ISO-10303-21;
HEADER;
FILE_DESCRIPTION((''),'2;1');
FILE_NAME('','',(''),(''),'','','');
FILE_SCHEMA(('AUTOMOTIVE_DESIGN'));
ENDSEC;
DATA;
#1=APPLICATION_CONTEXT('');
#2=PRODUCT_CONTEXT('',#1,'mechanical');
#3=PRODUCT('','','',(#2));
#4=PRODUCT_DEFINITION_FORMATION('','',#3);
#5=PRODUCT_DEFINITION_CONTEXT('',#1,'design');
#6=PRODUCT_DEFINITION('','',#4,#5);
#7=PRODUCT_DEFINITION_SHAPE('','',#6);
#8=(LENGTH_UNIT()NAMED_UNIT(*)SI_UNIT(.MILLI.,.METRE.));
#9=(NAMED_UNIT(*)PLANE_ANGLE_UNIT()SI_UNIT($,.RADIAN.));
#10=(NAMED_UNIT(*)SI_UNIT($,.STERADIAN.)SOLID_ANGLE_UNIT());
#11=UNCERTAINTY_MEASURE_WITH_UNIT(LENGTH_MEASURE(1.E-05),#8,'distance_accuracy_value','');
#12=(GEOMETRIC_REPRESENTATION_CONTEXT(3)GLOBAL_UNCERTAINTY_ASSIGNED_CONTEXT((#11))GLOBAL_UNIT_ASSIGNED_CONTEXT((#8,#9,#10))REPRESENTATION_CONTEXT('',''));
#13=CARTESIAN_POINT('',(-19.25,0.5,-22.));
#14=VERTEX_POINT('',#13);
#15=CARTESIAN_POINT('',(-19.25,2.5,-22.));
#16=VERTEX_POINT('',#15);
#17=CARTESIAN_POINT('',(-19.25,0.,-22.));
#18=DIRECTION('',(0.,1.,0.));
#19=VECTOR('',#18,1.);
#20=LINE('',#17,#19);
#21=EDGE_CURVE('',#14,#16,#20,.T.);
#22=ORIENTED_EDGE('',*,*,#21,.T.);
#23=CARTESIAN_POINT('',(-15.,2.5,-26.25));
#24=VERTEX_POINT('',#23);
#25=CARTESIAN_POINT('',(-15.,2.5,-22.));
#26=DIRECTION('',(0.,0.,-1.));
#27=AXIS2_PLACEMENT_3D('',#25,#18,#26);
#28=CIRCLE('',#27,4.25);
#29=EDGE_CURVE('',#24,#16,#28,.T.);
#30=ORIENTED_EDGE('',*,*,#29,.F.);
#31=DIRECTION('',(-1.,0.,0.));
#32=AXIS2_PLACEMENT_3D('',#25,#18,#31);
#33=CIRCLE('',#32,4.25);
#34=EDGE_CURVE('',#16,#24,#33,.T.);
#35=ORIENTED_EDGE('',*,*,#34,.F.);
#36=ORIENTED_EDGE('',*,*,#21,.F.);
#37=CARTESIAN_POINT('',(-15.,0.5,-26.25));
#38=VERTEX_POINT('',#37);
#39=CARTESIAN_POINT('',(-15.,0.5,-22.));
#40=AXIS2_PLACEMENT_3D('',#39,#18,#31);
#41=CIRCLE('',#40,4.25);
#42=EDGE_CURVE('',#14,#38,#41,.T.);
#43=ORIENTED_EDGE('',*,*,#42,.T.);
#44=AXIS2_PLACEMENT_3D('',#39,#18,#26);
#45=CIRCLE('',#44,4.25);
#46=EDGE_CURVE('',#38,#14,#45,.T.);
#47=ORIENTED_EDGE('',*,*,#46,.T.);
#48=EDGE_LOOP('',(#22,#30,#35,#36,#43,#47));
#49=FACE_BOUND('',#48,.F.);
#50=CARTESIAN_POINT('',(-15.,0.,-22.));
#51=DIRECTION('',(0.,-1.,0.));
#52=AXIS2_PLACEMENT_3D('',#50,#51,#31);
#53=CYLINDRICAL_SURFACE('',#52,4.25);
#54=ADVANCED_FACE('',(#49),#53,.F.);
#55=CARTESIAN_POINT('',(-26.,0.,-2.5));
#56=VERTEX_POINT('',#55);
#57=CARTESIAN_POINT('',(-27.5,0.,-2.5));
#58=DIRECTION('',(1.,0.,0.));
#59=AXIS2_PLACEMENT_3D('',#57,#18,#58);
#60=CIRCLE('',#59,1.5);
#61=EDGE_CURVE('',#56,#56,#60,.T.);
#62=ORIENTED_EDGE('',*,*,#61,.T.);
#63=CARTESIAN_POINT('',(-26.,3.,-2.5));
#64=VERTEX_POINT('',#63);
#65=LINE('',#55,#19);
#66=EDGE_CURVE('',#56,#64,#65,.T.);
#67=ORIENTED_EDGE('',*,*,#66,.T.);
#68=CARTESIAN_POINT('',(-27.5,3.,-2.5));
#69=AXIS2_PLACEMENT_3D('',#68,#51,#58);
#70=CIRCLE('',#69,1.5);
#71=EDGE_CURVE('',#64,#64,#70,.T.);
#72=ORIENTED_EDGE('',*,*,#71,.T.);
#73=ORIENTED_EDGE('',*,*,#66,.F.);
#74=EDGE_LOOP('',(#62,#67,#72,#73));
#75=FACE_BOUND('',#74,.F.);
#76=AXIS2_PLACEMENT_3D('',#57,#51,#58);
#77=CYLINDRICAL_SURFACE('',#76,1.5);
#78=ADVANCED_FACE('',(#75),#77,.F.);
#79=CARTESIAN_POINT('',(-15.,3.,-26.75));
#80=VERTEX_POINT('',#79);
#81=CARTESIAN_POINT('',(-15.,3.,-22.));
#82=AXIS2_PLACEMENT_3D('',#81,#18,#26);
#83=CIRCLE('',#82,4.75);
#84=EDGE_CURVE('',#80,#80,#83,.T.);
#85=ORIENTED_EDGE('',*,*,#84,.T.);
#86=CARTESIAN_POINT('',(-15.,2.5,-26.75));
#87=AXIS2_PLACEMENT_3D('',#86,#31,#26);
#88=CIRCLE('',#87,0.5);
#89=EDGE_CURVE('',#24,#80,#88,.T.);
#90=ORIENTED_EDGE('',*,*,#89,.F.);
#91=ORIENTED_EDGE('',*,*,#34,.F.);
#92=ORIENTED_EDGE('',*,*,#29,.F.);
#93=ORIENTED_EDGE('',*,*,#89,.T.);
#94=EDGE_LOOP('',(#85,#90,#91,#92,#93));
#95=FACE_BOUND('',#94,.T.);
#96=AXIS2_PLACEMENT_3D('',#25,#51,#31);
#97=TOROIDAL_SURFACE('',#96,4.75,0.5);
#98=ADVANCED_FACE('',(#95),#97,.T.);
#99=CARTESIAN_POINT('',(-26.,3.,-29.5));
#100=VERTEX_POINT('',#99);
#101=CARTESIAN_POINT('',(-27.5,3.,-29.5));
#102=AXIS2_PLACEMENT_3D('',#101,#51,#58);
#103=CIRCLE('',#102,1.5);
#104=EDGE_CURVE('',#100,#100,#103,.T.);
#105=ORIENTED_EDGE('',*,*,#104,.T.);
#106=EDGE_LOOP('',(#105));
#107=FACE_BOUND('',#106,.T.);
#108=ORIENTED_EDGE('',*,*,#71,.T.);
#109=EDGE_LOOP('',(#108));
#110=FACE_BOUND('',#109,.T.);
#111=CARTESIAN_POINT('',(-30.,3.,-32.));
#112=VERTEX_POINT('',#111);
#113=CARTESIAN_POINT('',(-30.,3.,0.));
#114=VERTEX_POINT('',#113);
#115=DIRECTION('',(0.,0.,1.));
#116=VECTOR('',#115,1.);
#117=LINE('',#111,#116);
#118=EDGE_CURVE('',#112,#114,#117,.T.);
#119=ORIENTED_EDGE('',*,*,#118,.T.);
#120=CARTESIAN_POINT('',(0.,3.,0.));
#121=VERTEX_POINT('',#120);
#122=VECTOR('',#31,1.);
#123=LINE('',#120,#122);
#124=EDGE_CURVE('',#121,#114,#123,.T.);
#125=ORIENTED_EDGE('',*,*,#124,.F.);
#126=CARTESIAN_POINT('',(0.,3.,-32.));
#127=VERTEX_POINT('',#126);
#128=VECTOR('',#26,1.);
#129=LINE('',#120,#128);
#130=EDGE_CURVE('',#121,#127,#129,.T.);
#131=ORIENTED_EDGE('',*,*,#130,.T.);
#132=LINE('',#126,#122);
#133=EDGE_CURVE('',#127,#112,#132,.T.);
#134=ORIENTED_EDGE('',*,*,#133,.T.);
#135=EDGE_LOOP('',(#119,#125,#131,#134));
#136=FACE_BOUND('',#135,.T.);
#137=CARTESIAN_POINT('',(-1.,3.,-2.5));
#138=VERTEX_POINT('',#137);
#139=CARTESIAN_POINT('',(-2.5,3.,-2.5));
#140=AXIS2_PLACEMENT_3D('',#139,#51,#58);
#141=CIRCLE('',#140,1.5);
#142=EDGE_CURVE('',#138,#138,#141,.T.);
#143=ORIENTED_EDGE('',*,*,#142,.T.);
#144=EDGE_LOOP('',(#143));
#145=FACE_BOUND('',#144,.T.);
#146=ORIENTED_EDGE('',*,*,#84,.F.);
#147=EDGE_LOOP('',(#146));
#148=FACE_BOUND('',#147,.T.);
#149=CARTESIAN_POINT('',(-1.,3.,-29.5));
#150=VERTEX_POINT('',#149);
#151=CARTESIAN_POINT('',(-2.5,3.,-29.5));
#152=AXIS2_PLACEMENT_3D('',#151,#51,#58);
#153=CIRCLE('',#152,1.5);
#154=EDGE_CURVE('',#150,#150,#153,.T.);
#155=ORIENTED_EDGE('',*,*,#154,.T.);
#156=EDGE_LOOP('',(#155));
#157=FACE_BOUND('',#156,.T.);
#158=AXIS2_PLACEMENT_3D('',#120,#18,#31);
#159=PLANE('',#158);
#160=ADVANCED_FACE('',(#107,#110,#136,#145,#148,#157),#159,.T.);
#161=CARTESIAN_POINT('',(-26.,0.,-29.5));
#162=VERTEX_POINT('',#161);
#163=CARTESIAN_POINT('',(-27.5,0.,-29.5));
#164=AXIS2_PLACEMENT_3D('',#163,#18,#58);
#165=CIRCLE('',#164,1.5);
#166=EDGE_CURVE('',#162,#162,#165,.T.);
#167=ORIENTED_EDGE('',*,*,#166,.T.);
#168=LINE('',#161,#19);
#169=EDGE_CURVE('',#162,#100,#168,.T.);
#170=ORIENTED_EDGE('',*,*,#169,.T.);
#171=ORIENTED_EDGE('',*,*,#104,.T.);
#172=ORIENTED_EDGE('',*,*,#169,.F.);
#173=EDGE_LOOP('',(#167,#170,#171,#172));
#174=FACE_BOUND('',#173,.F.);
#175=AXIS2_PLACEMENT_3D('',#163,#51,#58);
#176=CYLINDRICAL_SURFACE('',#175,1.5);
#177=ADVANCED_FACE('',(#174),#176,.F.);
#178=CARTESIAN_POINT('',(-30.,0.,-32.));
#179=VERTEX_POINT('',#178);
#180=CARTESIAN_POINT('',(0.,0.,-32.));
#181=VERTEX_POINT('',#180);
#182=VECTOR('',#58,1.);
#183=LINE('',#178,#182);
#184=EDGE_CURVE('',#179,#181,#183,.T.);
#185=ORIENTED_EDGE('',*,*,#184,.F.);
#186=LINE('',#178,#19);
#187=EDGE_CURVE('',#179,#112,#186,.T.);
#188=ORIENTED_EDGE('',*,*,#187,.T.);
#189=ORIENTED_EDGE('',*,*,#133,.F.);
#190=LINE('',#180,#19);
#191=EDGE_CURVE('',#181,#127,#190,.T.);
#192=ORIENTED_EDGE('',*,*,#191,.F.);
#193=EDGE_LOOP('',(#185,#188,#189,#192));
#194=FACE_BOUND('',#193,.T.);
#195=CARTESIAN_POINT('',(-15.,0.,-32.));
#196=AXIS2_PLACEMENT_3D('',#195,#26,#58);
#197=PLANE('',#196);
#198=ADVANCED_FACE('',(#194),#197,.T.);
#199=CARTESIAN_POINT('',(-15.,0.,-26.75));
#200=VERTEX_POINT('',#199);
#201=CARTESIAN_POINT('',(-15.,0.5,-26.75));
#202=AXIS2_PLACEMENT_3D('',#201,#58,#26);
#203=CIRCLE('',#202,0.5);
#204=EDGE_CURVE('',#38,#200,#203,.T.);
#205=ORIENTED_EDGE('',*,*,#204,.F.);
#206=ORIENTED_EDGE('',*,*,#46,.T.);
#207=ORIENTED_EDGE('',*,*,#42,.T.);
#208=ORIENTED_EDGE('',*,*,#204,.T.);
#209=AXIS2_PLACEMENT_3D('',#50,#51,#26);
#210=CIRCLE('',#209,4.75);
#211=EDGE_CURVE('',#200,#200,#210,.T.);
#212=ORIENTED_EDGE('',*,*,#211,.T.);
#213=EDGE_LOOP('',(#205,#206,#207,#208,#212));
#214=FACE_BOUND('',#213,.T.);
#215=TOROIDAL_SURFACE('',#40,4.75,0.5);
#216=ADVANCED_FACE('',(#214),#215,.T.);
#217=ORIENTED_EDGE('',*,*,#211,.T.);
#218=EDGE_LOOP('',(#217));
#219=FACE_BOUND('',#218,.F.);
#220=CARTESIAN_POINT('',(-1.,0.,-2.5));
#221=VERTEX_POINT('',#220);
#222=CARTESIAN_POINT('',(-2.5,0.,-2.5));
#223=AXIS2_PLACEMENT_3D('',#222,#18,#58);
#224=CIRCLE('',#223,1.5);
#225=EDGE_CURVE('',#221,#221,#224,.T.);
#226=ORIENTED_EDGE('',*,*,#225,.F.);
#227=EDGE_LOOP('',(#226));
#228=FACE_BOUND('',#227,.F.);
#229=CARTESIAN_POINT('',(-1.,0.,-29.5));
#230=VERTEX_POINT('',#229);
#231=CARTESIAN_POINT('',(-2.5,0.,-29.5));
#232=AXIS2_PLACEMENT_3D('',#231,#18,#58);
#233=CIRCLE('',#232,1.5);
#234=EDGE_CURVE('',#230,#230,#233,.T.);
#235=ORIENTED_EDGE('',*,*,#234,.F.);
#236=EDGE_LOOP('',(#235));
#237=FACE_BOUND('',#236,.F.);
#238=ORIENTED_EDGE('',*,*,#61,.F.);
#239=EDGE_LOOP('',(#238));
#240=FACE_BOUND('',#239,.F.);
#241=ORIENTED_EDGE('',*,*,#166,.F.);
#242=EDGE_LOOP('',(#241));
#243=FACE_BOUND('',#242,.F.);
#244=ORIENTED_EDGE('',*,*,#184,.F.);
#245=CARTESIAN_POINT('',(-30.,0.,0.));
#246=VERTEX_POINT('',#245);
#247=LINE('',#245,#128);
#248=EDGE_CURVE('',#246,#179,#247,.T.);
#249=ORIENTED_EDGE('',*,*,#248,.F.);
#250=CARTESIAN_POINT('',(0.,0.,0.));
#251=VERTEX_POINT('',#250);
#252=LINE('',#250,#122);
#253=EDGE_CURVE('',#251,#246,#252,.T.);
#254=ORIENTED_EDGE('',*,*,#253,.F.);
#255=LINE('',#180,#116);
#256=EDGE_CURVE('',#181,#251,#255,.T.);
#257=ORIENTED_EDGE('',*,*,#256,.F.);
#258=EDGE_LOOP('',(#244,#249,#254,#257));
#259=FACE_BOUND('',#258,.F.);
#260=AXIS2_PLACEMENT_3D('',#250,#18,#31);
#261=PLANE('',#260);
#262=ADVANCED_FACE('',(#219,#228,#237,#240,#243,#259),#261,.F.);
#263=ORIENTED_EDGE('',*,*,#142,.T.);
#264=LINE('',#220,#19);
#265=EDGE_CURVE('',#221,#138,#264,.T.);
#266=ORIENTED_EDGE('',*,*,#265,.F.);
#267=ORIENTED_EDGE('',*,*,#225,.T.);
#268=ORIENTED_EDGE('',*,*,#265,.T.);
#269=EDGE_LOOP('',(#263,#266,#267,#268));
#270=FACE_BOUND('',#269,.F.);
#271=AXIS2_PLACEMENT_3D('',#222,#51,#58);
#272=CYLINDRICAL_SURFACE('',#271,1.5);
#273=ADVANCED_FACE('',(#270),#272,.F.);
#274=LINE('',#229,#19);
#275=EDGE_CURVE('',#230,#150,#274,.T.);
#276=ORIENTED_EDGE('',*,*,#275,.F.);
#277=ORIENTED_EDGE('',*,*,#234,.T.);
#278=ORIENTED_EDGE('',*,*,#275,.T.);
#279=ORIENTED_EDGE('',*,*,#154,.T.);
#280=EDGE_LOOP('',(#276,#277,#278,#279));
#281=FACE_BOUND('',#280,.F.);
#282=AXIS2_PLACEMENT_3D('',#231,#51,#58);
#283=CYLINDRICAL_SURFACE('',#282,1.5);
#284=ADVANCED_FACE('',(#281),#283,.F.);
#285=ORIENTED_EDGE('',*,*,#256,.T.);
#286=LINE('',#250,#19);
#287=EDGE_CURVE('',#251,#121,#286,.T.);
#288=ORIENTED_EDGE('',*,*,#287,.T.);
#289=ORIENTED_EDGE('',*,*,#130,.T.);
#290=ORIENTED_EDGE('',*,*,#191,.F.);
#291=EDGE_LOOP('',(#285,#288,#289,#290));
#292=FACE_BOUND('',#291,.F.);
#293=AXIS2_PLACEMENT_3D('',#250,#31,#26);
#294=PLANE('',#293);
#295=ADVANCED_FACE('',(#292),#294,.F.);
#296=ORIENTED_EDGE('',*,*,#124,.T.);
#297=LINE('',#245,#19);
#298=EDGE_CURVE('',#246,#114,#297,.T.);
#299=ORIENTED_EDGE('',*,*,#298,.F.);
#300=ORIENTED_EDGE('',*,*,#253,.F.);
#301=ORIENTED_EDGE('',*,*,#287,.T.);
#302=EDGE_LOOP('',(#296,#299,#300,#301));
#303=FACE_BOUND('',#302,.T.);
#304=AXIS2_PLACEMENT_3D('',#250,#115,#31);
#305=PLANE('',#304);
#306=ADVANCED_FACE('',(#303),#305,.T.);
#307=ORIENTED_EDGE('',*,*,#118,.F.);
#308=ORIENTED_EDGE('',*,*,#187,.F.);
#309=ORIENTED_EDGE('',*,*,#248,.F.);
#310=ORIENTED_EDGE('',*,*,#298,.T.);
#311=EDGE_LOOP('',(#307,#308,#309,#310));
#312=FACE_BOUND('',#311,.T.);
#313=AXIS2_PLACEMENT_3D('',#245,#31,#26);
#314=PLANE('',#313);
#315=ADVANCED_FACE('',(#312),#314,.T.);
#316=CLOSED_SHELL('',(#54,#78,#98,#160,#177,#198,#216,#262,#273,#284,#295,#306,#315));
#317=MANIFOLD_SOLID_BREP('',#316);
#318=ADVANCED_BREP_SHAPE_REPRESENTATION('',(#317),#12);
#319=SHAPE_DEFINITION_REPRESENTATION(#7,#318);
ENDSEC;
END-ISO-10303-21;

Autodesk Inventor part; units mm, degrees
ref_plane "YZ Plane" through (0, 0, 0) normal (1, 0, 0) x (0, 1, 0)
ref_plane "XZ Plane" through (0, 0, 0) normal (0, 1, 0) x (-1, 0, 0)
ref_plane "XY Plane" through (0, 0, 0) normal (0, 0, 1) x (1, 0, 0)
sketch "Boceto1" plane through (0, 0, 0) normal (0, 1, 0) x (-1, 0, 0)
  line L0 (0, 0) -> (30, 0)
  line L1 (30, 0) -> (30, -10)
  line L2 (30, -10) -> (30, -10)
  line L3 (30, -10) -> (30, -22)
  line L4 (30, -22) -> (30, -22)
  line L5 (30, -22) -> (30, -32)
  line L6 (30, -32) -> (0, -32)
  line L7 (0, -32) -> (0, -22)
  line L8 (0, -22) -> (0, -22)
  line L9 (0, -22) -> (0, -10)
  line L10 (0, -10) -> (0, -10)
  line L11 (0, 0) -> (0, -10)
  line L12 (15, -32) -> (15, -22)
  circle A0 centre (15, -22) radius 4.25
  dimension "d0" = 30
  dimension "d1" = 10
  dimension "d2" = 0
  dimension "d3" = 12
  dimension "d4" = 10
  dimension "d5" = 10
  dimension "d6" = 0
  dimension "d10" = 8.5
extrude "Extrusión2" add sketch "Boceto1" along normal blind 3
fillet "Empalme1" radius 0.5 2 edges at (-10.75, 3, -22) (-10.75, 0, -22)
sketch "Sketch4" plane through (0, 0, 0) normal (0, -1, 0) x (1, 0, 0)
  line L0 (-30, 0) -> (-27.5, 0)
  line L1 (-30, 0) -> (0, 0) projected
  line L2 (-27.5, 0) -> (-27.5, -2.5)
  line L3 (0, 0) -> (-2.5, 0)
  line L4 (-2.5, 0) -> (-2.5, -2.5)
  line L5 (0, -32) -> (-2.5, -32)
  line L6 (0, -32) -> (-30, -32) projected
  line L7 (-2.5, -32) -> (-2.5, -29.5)
  line L8 (-30, -32) -> (-27.5, -32)
  line L9 (-27.5, -32) -> (-27.5, -29.5)
  circle A0 centre (-27.5, -2.5) radius 1.5
  circle A1 centre (-2.5, -2.5) radius 1.5
  circle A2 centre (-2.5, -29.5) radius 1.5
  circle A3 centre (-27.5, -29.5) radius 1.5
  dimension "d20" = 2.5
  dimension "d21" = 2.5
  dimension "d22" = 2.5
  dimension "d23" = 2.5
  dimension "d24" = 2.5
  dimension "d25" = 2.5
  dimension "d26" = 2.5
  dimension "d27" = 2.5
  dimension "d28" = 3
  dimension "d29" = 3
  dimension "d30" = 3
  dimension "d31" = 3
extrude "Extrusion4" cut sketch "Sketch4" against normal through all
properties part number "core_case"
